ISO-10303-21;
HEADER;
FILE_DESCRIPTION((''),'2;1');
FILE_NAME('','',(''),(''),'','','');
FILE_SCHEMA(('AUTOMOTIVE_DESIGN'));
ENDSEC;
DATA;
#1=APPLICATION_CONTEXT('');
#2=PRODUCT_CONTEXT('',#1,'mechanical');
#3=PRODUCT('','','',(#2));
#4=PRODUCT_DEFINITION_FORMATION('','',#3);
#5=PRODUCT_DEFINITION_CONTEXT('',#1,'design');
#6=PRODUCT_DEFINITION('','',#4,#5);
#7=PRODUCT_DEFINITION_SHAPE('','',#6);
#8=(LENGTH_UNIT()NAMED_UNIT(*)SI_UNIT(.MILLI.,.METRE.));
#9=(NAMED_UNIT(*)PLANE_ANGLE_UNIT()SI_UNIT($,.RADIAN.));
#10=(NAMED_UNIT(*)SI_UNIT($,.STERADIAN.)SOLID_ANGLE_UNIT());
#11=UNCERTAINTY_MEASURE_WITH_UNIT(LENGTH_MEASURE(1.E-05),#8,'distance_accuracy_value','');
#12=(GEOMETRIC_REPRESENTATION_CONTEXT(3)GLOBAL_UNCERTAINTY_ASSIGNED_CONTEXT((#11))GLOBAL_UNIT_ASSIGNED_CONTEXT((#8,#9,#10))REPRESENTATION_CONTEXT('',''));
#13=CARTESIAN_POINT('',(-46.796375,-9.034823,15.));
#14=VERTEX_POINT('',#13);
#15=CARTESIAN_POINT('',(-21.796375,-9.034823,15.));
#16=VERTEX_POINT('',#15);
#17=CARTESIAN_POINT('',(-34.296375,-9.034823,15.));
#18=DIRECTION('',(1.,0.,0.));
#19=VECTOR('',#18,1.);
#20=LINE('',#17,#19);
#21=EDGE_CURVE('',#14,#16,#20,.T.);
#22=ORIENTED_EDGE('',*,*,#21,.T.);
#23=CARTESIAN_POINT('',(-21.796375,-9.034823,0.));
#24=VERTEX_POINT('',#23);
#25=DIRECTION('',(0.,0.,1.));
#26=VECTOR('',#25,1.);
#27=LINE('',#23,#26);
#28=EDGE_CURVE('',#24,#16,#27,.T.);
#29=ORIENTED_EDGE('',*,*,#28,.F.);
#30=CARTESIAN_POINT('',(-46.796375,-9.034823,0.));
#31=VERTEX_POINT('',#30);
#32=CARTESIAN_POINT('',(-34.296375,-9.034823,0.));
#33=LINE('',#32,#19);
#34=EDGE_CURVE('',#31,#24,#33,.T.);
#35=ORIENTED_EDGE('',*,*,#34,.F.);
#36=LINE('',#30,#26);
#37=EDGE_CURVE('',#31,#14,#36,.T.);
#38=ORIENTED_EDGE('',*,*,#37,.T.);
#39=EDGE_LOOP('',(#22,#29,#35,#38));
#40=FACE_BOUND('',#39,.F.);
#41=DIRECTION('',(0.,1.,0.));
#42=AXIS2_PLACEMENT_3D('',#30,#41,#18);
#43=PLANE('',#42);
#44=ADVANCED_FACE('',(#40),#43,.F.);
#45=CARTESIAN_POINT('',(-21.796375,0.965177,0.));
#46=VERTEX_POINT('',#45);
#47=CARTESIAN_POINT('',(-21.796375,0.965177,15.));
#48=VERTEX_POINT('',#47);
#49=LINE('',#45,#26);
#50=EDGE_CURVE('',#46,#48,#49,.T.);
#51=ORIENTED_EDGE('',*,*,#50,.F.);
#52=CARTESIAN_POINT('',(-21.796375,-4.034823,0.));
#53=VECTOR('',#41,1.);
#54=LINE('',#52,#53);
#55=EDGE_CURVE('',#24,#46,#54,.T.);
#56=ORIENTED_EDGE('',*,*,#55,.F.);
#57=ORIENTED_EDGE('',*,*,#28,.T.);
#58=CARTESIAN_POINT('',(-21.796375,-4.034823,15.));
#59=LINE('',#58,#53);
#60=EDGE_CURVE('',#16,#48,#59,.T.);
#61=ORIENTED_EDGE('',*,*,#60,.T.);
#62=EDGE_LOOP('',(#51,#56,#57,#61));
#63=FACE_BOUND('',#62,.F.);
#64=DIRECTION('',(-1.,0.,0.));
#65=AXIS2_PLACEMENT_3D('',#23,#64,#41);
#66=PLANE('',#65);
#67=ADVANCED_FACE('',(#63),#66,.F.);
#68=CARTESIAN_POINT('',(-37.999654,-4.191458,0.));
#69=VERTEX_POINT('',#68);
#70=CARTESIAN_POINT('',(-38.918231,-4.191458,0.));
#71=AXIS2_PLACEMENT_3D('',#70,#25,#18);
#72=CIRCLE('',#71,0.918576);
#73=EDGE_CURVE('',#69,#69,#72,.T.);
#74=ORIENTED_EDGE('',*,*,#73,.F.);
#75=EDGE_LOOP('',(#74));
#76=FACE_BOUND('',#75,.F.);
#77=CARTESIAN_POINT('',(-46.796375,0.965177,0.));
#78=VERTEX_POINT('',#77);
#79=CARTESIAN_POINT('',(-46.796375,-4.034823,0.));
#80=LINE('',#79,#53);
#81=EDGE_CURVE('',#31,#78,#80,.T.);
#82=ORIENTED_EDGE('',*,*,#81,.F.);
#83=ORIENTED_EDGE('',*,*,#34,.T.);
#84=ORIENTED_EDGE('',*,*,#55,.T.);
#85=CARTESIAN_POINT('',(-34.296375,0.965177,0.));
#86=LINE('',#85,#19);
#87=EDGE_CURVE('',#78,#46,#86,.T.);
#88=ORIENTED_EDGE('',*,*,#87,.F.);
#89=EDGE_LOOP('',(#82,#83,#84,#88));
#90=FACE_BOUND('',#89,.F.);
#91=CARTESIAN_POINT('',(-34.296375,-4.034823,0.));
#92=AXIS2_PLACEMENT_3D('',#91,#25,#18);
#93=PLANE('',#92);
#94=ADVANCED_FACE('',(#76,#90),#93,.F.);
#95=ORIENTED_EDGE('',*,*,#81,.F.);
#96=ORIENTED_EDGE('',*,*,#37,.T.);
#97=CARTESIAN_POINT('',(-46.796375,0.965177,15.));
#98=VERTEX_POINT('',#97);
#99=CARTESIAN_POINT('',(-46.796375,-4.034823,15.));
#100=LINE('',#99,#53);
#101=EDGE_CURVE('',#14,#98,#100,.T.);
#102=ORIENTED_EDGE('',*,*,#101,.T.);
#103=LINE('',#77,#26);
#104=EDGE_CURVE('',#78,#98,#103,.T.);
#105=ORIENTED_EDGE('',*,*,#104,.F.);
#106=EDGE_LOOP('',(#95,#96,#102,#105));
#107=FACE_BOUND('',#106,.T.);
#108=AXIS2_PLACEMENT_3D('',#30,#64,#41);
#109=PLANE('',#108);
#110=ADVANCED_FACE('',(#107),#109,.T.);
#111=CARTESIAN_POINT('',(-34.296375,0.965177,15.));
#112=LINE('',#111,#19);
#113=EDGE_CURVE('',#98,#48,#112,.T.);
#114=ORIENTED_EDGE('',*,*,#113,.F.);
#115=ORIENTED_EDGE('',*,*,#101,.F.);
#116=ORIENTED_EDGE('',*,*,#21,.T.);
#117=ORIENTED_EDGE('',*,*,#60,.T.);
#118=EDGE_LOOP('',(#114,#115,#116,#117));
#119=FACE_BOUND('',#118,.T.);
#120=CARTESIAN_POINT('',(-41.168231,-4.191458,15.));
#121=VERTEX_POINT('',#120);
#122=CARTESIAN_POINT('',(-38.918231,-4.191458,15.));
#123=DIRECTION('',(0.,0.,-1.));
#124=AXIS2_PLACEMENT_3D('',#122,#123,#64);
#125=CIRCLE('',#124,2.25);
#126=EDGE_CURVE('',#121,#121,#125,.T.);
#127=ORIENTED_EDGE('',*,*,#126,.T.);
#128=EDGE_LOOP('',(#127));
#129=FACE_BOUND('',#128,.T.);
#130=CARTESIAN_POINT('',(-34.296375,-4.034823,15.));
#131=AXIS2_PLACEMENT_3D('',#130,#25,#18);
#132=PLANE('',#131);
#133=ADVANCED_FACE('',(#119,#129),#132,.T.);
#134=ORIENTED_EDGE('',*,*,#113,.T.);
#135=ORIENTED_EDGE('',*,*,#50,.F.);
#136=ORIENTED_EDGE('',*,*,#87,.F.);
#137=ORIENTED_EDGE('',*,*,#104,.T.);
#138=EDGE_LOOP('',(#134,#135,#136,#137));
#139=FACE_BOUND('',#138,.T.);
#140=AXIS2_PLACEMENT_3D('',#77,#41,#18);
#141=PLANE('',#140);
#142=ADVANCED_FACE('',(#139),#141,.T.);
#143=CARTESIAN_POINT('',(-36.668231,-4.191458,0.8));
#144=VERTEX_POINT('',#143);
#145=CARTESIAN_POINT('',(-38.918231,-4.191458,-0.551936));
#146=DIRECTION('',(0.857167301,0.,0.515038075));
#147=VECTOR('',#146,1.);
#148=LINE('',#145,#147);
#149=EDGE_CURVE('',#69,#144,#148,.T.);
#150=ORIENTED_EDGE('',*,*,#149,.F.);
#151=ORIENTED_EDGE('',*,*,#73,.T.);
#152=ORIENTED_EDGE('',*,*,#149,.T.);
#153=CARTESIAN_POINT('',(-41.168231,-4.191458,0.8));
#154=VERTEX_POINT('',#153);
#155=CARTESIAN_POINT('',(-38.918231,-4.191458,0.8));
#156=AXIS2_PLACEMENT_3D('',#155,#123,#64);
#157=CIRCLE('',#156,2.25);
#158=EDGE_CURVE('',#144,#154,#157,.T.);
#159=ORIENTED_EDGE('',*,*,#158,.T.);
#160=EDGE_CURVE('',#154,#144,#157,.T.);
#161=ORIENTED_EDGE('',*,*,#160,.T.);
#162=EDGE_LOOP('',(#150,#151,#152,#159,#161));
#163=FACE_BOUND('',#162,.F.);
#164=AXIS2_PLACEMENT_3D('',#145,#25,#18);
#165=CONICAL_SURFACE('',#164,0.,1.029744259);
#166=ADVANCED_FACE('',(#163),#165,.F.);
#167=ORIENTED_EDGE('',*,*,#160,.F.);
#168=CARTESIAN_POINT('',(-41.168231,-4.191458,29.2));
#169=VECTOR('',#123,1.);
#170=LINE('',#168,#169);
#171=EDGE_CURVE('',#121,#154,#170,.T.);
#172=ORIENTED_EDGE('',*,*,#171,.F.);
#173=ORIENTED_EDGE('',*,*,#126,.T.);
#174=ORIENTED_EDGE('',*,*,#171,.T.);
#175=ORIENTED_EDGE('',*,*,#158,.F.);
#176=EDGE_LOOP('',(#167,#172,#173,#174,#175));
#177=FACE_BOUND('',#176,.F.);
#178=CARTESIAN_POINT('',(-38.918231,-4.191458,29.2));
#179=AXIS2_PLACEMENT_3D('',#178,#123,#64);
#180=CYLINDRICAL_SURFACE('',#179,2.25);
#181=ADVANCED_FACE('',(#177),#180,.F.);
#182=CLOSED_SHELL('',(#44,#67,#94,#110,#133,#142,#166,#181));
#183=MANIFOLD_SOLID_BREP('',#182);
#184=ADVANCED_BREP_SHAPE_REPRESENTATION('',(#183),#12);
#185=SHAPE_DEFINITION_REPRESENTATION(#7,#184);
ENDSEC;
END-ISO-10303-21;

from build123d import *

# Parameters (mm, degrees)
F0_W     = 25
F0_H     = 10
F1_DEPTH = 15
F3_D     = 4.5
F3_DEPTH = 14.2
F3_TIP   = 1.3519363928


with BuildPart() as f1:
    # F0 (on Top) → F1 (new body)
    with BuildSketch(Plane.XY):
        with Locations((-34.2963750242, -4.0348231601)):
            Rectangle(F0_W, F0_H)
    extrude(amount=F1_DEPTH)

    # F3
    with Locations(Plane.XY.offset(15)):
        with Locations((-38.9182306826, -4.1914577596)):
            Hole(F3_D / 2, depth=F3_DEPTH)
            with Locations((0, 0, -(F3_DEPTH + F3_TIP / 2))):  # 118° drill point
                Cone(0, F3_D / 2, F3_TIP, mode=Mode.SUBTRACT)


solid = f1.part
